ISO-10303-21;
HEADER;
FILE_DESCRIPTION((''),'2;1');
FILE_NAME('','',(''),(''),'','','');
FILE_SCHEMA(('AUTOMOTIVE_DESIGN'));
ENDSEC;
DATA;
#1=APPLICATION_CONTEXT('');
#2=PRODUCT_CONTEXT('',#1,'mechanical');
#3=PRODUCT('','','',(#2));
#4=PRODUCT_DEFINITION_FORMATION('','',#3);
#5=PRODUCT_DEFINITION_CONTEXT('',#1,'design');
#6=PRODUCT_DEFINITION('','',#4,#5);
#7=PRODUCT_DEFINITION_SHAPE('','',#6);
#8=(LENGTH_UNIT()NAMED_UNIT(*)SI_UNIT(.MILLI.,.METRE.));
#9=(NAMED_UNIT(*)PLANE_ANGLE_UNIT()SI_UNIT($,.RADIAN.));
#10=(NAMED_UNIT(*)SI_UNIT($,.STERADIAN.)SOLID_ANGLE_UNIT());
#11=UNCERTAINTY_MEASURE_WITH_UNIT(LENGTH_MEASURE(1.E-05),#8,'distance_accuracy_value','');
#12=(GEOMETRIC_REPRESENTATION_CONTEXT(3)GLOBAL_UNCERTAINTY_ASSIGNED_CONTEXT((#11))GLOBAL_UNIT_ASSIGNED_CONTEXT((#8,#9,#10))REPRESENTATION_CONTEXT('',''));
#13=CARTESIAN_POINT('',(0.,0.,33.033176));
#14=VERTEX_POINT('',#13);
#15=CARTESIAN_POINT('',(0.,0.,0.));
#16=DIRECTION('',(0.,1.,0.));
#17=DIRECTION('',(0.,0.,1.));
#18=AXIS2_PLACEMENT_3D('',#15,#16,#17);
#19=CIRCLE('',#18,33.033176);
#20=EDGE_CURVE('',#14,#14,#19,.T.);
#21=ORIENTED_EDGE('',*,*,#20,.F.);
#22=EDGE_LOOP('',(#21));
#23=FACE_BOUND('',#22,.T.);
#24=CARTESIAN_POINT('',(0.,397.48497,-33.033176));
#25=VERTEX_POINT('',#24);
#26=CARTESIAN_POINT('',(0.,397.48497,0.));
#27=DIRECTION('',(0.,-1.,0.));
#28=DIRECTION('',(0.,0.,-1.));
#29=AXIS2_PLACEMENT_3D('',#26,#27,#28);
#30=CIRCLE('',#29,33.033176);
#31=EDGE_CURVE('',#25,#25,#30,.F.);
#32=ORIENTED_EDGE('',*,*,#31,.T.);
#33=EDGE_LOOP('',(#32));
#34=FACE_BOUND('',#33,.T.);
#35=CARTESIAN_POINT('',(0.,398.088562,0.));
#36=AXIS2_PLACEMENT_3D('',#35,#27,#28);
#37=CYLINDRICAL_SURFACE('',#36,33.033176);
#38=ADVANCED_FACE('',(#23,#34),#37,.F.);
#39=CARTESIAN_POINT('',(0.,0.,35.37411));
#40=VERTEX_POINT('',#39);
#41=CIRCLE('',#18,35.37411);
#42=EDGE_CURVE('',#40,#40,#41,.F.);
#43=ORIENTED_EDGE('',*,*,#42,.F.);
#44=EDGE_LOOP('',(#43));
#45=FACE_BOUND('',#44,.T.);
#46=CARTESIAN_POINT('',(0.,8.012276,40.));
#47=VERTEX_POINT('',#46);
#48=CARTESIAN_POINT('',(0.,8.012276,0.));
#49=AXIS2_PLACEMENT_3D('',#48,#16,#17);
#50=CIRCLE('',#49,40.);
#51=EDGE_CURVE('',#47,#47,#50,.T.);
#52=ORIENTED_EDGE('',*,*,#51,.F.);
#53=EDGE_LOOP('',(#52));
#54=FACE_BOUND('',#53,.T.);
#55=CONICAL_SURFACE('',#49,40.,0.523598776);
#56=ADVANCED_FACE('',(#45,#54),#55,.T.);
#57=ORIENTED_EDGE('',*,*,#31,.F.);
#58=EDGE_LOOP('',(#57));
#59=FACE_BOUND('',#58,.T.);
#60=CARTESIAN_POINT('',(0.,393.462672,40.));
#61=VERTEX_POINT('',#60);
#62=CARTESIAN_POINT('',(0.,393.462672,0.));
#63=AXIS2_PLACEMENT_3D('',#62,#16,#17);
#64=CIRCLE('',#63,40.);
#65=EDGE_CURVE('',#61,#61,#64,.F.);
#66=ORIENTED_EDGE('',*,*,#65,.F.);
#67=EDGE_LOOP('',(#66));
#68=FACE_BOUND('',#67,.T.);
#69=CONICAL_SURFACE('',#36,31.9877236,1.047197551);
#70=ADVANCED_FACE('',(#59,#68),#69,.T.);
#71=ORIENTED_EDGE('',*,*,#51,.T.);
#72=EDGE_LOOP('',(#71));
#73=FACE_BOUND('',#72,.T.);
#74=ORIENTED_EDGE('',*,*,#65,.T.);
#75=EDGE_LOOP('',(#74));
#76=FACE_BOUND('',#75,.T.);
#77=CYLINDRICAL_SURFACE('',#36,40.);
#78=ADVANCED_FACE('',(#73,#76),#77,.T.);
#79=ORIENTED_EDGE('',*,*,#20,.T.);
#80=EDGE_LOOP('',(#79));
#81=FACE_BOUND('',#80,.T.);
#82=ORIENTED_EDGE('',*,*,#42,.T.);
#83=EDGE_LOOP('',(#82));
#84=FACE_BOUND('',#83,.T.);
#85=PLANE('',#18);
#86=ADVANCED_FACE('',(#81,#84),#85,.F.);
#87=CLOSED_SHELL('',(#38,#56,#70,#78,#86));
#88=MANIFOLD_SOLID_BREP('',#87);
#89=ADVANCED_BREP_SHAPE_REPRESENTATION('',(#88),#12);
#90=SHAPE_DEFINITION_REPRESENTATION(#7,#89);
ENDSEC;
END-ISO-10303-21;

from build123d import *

# Parameters (mm, degrees)
SKETCH1_R           = 40
BOSS_EXTRUDE1_DEPTH = 398.088562
SKETCH2_R           = 33.033176467
CUT_EXTRUDE1_DEPTH  = 403.087680979
CHAMFER1_SIZE       = 4.62589
CHAMFER1_SIZE_2     = 8.012276


with BuildPart() as part:
    # Sketch1 → Boss-Extrude1 (new body)
    with BuildSketch(Plane(origin=(0, 0, 0), x_dir=(1, 0, 0), z_dir=(0, 1, 0))):
        with Locations(Location((0, 0, 0), (0, 0, 270))):
            Circle(SKETCH1_R)
    extrude(amount=BOSS_EXTRUDE1_DEPTH)

    # Sketch2 → Cut-Extrude1 (cut, through all)
    with BuildSketch(Plane(origin=(0, 0, 0), x_dir=(1, 0, 0), z_dir=(0, 1, 0))):
        with Locations(Location((0, 0, 0), (0, 0, 270))):
            Circle(SKETCH2_R)
    extrude(amount=CUT_EXTRUDE1_DEPTH, mode=Mode.SUBTRACT)

    # Chamfer1
    # the kernel refuses this chamfer: 8.012276, 4.62589 mm, written as the material it takes off along each edge
    with BuildSketch(Plane(origin=(0, 398.088562, 0), x_dir=(0, 0, 1), z_dir=(-1, 0, 0))) as chamfer1_piece_1:
        Polygon((40, -CHAMFER1_SIZE), (40 - CHAMFER1_SIZE_2, 0), (40, 0), align=None)
    revolve(axis=Axis((0, 398.088562, 0), (0, 1, 0)), mode=Mode.SUBTRACT)
    with BuildSketch(Plane(origin=(0, 0, 0), x_dir=(0, 0, 1), z_dir=(-1, 0, 0))) as chamfer1_piece_2:
        Polygon((40, CHAMFER1_SIZE_2), (40 - CHAMFER1_SIZE, 0), (40, 0), align=None)
    revolve(axis=Axis((0, 0, 0), (0, 1, 0)), mode=Mode.SUBTRACT)


solid = part.part
